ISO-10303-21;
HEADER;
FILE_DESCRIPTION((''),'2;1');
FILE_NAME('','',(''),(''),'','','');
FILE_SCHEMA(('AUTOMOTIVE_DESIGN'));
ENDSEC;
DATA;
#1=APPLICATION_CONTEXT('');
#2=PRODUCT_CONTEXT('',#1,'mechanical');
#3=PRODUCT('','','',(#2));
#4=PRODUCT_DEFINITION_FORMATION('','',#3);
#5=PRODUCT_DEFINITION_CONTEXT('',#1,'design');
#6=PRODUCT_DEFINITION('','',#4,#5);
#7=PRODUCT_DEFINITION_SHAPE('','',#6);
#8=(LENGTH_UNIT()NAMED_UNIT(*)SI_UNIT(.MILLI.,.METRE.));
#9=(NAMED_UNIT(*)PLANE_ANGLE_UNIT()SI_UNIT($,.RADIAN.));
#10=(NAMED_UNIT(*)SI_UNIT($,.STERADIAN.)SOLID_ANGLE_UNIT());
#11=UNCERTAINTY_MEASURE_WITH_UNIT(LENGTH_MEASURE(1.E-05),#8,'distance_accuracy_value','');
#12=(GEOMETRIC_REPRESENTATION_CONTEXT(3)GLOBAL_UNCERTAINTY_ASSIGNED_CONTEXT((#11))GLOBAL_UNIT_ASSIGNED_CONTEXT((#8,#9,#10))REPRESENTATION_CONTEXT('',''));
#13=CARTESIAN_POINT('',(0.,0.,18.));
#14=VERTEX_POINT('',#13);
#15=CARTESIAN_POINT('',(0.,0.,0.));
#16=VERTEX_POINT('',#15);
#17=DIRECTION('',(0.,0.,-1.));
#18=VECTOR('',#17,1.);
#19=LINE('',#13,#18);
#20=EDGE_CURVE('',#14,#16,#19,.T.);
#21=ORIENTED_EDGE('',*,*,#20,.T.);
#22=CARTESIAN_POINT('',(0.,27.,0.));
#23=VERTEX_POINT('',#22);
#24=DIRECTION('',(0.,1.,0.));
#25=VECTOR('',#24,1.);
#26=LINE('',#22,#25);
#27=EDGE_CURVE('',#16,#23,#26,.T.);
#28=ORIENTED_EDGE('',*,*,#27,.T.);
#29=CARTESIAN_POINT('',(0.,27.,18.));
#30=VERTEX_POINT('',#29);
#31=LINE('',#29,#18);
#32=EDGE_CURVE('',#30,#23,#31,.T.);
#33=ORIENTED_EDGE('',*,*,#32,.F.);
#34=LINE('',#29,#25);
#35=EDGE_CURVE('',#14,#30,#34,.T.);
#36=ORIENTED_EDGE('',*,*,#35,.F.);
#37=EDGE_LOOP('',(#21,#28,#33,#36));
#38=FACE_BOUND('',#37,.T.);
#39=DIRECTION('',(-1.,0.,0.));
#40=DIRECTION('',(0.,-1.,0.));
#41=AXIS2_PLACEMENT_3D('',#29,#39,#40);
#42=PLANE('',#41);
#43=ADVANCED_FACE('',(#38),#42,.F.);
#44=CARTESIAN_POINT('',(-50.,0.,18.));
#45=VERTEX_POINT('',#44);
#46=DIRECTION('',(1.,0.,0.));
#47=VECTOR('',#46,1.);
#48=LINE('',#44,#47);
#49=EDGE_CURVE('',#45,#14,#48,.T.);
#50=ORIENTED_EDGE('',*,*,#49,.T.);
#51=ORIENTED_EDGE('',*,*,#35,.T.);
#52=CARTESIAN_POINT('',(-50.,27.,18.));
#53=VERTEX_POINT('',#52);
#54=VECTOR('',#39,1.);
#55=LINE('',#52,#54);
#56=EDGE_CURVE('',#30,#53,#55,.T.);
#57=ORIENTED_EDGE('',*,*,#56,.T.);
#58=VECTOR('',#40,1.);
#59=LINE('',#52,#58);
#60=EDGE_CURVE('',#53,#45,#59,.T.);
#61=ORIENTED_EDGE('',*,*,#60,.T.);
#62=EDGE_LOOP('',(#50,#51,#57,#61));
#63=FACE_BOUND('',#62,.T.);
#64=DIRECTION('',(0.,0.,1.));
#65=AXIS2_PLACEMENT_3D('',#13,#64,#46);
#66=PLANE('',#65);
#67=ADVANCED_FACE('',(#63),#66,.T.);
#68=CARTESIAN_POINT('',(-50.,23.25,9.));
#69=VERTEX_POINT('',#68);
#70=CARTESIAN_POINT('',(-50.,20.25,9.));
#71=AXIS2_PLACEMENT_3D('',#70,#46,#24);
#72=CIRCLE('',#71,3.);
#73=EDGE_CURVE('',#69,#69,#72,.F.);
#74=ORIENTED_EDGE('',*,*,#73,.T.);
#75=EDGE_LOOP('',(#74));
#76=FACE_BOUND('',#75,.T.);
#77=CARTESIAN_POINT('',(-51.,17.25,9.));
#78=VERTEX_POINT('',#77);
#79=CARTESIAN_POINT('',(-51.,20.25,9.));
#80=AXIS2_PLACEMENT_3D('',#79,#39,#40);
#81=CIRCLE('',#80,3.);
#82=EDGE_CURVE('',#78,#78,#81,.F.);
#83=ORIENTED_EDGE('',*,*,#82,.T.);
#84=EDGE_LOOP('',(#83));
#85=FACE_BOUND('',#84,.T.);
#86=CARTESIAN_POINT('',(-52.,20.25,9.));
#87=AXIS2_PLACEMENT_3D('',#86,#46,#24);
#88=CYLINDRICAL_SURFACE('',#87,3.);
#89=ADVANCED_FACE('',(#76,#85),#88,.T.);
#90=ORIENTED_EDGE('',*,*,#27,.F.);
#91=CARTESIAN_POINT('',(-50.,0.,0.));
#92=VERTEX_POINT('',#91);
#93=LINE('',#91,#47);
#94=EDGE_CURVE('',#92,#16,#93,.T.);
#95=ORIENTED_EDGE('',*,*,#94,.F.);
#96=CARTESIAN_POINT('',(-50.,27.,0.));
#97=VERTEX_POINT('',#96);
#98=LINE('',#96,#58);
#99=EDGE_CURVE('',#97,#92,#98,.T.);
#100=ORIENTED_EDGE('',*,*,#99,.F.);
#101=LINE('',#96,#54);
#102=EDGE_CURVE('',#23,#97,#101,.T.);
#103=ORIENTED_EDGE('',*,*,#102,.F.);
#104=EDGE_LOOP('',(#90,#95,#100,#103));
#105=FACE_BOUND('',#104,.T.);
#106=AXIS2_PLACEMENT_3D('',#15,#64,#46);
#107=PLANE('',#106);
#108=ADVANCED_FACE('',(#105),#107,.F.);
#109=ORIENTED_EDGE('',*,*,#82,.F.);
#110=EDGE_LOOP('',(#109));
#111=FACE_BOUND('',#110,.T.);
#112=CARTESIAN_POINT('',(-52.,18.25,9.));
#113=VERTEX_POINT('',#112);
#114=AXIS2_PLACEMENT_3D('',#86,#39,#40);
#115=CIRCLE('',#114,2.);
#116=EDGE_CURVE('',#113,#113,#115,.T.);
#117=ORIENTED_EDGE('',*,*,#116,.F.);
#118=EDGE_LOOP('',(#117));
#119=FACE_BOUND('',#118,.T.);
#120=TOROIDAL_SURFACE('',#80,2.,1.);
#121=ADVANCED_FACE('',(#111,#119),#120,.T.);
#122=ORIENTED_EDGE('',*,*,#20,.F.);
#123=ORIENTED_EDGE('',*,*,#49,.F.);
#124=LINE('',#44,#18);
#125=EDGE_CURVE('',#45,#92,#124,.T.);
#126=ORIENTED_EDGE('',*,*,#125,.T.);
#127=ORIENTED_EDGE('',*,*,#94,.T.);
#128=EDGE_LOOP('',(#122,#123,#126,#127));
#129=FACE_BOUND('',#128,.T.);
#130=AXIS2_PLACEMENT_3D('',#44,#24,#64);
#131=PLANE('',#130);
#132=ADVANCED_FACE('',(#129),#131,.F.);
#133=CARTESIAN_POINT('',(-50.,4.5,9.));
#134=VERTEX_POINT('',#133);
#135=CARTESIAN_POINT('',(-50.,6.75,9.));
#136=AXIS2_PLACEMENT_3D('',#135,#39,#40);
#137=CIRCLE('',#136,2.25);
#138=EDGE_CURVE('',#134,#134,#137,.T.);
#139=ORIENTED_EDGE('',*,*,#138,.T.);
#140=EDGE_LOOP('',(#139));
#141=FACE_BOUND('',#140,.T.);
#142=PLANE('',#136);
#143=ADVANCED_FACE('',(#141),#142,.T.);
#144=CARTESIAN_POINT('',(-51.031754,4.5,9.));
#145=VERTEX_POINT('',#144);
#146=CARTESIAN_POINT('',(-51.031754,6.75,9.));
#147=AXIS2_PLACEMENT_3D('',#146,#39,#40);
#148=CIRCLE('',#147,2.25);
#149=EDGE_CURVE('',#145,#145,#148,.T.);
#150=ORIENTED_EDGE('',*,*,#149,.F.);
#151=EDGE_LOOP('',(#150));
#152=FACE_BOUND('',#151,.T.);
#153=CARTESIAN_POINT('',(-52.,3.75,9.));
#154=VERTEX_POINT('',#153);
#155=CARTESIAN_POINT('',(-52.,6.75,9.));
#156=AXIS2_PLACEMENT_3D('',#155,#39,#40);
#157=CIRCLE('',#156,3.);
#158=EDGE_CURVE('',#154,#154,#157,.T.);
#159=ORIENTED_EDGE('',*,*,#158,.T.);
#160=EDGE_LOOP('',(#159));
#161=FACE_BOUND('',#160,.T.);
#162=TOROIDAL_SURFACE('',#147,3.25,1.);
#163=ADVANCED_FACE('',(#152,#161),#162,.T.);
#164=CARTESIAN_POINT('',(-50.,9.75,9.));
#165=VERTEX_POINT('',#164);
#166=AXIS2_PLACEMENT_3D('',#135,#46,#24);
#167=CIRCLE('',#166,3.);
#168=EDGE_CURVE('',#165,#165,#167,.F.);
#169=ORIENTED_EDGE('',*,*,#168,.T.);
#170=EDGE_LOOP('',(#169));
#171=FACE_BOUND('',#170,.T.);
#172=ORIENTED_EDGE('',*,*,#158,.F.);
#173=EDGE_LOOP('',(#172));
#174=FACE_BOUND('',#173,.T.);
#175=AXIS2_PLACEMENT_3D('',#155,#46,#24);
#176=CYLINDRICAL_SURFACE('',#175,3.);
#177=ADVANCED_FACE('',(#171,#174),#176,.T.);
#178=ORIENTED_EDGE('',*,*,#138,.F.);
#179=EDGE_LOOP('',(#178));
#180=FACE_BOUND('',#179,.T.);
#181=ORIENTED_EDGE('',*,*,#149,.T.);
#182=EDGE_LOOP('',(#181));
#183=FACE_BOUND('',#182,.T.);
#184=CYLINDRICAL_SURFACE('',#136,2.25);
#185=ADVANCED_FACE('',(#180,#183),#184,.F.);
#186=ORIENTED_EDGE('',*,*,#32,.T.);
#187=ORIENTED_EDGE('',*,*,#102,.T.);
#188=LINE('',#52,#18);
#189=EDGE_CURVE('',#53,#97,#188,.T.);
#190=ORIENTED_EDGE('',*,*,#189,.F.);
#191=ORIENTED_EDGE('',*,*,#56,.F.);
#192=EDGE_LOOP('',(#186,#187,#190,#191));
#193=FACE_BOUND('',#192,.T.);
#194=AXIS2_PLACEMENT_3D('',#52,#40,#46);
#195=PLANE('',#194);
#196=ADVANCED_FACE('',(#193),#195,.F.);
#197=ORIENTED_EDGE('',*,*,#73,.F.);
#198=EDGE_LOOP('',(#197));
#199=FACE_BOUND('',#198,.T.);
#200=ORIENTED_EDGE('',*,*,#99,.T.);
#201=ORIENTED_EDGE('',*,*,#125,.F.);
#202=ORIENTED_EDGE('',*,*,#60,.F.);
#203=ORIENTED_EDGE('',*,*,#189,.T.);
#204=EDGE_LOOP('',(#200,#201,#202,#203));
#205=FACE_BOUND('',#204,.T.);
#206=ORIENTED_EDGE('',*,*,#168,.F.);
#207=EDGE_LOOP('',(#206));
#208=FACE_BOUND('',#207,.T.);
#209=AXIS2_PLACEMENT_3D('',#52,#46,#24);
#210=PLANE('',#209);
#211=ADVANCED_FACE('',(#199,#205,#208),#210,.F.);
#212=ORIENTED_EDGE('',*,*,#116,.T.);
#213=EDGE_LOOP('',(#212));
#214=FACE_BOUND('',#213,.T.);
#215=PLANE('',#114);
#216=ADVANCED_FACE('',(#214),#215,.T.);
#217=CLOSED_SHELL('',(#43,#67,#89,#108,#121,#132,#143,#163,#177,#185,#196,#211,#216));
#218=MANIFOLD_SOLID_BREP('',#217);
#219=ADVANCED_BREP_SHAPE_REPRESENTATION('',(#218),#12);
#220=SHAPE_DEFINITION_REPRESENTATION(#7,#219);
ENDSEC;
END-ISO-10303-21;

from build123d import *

# Parameters (mm, degrees)
BOSS_EXTRUDE1_DEPTH = 18
SKETCH2_R           = 3.0000000000000004
SKETCH2_R_2         = 3.0000000000000013
BOSS_EXTRUDE3_DEPTH = 2
FILLET1_R           = 1
SKETCH3_R           = 2.250000000000001
CUT_EXTRUDE1_DEPTH  = 2
FILLET3_R           = 1


with BuildPart() as part:
    # Sketch1 → Boss-Extrude1 (new body)
    with BuildSketch(Plane.XY):
        Polygon((-50, 27), (0, 27.000000000000007), (0, 0), (-49.999999999999986, 0), align=None)
    extrude(amount=BOSS_EXTRUDE1_DEPTH)

    # Sketch2 → Boss-Extrude3 (add)
    with BuildSketch(Plane.ZY.offset(49.999999999999986)):
        with Locations(Location((9, 20.250000000000025, 0), (0, 0, 90))):
            Circle(SKETCH2_R)
        with Locations(Location((9, 6.749999999999998, 0), (0, 0, 90))):
            Circle(SKETCH2_R_2)
    extrude(amount=BOSS_EXTRUDE3_DEPTH)

    # Fillet1
    fillet1_edges = [part.edges().sort_by_distance(p)[0] for p in [
        (-51.99999999999999, 17.249999999999996, 9),
    ]]
    fillet(fillet1_edges, radius=FILLET1_R)

    # Sketch3 → Cut-Extrude1 (cut)
    with BuildSketch(Plane.ZY.offset(51.99999999999999)):
        with Locations(Location((9, 6.749999999999998, 0), (0, 0, 270))):
            Circle(SKETCH3_R)
    extrude(amount=-CUT_EXTRUDE1_DEPTH, mode=Mode.SUBTRACT)

    # Fillet3
    # the kernel refuses this fillet: 1 mm, written as the material it takes off along each edge
    with BuildSketch(Plane(origin=(-51.99999999999999, 6.749999999999972, 9), x_dir=(0, -1, 0), z_dir=(0, 0, -1))) as fillet3_piece_1:
        with BuildLine():
            CenterArc((3.25, -0.9682458365518585), FILLET3_R, 104.47751218592994, 75.52248781407006)
            Line((2.25, -0.9682458365518585), (2.2300000000000004, -0.9682458365518585))
            Line((2.2300000000000004, -0.9682458365518585), (2.2300000000000013, 0))
            Line((2.2300000000000013, 0), (2.250000000000001, 0.02000000000000313))
            ThreePointArc((2.250000000000001, 0.02000000000000313), (2.625000000000001, 0.01999999999999602), (2.9950000000000006, 0.01936491673102836))
            Line((2.9950000000000006, 0.01936491673102836), (3.0000000000000004, -7.11e-15))
        make_face()
    revolve(axis=Axis((-51.99999999999999, 6.749999999999972, 9), (-1, -5.1e-16, 0)), mode=Mode.SUBTRACT)


solid = part.part
